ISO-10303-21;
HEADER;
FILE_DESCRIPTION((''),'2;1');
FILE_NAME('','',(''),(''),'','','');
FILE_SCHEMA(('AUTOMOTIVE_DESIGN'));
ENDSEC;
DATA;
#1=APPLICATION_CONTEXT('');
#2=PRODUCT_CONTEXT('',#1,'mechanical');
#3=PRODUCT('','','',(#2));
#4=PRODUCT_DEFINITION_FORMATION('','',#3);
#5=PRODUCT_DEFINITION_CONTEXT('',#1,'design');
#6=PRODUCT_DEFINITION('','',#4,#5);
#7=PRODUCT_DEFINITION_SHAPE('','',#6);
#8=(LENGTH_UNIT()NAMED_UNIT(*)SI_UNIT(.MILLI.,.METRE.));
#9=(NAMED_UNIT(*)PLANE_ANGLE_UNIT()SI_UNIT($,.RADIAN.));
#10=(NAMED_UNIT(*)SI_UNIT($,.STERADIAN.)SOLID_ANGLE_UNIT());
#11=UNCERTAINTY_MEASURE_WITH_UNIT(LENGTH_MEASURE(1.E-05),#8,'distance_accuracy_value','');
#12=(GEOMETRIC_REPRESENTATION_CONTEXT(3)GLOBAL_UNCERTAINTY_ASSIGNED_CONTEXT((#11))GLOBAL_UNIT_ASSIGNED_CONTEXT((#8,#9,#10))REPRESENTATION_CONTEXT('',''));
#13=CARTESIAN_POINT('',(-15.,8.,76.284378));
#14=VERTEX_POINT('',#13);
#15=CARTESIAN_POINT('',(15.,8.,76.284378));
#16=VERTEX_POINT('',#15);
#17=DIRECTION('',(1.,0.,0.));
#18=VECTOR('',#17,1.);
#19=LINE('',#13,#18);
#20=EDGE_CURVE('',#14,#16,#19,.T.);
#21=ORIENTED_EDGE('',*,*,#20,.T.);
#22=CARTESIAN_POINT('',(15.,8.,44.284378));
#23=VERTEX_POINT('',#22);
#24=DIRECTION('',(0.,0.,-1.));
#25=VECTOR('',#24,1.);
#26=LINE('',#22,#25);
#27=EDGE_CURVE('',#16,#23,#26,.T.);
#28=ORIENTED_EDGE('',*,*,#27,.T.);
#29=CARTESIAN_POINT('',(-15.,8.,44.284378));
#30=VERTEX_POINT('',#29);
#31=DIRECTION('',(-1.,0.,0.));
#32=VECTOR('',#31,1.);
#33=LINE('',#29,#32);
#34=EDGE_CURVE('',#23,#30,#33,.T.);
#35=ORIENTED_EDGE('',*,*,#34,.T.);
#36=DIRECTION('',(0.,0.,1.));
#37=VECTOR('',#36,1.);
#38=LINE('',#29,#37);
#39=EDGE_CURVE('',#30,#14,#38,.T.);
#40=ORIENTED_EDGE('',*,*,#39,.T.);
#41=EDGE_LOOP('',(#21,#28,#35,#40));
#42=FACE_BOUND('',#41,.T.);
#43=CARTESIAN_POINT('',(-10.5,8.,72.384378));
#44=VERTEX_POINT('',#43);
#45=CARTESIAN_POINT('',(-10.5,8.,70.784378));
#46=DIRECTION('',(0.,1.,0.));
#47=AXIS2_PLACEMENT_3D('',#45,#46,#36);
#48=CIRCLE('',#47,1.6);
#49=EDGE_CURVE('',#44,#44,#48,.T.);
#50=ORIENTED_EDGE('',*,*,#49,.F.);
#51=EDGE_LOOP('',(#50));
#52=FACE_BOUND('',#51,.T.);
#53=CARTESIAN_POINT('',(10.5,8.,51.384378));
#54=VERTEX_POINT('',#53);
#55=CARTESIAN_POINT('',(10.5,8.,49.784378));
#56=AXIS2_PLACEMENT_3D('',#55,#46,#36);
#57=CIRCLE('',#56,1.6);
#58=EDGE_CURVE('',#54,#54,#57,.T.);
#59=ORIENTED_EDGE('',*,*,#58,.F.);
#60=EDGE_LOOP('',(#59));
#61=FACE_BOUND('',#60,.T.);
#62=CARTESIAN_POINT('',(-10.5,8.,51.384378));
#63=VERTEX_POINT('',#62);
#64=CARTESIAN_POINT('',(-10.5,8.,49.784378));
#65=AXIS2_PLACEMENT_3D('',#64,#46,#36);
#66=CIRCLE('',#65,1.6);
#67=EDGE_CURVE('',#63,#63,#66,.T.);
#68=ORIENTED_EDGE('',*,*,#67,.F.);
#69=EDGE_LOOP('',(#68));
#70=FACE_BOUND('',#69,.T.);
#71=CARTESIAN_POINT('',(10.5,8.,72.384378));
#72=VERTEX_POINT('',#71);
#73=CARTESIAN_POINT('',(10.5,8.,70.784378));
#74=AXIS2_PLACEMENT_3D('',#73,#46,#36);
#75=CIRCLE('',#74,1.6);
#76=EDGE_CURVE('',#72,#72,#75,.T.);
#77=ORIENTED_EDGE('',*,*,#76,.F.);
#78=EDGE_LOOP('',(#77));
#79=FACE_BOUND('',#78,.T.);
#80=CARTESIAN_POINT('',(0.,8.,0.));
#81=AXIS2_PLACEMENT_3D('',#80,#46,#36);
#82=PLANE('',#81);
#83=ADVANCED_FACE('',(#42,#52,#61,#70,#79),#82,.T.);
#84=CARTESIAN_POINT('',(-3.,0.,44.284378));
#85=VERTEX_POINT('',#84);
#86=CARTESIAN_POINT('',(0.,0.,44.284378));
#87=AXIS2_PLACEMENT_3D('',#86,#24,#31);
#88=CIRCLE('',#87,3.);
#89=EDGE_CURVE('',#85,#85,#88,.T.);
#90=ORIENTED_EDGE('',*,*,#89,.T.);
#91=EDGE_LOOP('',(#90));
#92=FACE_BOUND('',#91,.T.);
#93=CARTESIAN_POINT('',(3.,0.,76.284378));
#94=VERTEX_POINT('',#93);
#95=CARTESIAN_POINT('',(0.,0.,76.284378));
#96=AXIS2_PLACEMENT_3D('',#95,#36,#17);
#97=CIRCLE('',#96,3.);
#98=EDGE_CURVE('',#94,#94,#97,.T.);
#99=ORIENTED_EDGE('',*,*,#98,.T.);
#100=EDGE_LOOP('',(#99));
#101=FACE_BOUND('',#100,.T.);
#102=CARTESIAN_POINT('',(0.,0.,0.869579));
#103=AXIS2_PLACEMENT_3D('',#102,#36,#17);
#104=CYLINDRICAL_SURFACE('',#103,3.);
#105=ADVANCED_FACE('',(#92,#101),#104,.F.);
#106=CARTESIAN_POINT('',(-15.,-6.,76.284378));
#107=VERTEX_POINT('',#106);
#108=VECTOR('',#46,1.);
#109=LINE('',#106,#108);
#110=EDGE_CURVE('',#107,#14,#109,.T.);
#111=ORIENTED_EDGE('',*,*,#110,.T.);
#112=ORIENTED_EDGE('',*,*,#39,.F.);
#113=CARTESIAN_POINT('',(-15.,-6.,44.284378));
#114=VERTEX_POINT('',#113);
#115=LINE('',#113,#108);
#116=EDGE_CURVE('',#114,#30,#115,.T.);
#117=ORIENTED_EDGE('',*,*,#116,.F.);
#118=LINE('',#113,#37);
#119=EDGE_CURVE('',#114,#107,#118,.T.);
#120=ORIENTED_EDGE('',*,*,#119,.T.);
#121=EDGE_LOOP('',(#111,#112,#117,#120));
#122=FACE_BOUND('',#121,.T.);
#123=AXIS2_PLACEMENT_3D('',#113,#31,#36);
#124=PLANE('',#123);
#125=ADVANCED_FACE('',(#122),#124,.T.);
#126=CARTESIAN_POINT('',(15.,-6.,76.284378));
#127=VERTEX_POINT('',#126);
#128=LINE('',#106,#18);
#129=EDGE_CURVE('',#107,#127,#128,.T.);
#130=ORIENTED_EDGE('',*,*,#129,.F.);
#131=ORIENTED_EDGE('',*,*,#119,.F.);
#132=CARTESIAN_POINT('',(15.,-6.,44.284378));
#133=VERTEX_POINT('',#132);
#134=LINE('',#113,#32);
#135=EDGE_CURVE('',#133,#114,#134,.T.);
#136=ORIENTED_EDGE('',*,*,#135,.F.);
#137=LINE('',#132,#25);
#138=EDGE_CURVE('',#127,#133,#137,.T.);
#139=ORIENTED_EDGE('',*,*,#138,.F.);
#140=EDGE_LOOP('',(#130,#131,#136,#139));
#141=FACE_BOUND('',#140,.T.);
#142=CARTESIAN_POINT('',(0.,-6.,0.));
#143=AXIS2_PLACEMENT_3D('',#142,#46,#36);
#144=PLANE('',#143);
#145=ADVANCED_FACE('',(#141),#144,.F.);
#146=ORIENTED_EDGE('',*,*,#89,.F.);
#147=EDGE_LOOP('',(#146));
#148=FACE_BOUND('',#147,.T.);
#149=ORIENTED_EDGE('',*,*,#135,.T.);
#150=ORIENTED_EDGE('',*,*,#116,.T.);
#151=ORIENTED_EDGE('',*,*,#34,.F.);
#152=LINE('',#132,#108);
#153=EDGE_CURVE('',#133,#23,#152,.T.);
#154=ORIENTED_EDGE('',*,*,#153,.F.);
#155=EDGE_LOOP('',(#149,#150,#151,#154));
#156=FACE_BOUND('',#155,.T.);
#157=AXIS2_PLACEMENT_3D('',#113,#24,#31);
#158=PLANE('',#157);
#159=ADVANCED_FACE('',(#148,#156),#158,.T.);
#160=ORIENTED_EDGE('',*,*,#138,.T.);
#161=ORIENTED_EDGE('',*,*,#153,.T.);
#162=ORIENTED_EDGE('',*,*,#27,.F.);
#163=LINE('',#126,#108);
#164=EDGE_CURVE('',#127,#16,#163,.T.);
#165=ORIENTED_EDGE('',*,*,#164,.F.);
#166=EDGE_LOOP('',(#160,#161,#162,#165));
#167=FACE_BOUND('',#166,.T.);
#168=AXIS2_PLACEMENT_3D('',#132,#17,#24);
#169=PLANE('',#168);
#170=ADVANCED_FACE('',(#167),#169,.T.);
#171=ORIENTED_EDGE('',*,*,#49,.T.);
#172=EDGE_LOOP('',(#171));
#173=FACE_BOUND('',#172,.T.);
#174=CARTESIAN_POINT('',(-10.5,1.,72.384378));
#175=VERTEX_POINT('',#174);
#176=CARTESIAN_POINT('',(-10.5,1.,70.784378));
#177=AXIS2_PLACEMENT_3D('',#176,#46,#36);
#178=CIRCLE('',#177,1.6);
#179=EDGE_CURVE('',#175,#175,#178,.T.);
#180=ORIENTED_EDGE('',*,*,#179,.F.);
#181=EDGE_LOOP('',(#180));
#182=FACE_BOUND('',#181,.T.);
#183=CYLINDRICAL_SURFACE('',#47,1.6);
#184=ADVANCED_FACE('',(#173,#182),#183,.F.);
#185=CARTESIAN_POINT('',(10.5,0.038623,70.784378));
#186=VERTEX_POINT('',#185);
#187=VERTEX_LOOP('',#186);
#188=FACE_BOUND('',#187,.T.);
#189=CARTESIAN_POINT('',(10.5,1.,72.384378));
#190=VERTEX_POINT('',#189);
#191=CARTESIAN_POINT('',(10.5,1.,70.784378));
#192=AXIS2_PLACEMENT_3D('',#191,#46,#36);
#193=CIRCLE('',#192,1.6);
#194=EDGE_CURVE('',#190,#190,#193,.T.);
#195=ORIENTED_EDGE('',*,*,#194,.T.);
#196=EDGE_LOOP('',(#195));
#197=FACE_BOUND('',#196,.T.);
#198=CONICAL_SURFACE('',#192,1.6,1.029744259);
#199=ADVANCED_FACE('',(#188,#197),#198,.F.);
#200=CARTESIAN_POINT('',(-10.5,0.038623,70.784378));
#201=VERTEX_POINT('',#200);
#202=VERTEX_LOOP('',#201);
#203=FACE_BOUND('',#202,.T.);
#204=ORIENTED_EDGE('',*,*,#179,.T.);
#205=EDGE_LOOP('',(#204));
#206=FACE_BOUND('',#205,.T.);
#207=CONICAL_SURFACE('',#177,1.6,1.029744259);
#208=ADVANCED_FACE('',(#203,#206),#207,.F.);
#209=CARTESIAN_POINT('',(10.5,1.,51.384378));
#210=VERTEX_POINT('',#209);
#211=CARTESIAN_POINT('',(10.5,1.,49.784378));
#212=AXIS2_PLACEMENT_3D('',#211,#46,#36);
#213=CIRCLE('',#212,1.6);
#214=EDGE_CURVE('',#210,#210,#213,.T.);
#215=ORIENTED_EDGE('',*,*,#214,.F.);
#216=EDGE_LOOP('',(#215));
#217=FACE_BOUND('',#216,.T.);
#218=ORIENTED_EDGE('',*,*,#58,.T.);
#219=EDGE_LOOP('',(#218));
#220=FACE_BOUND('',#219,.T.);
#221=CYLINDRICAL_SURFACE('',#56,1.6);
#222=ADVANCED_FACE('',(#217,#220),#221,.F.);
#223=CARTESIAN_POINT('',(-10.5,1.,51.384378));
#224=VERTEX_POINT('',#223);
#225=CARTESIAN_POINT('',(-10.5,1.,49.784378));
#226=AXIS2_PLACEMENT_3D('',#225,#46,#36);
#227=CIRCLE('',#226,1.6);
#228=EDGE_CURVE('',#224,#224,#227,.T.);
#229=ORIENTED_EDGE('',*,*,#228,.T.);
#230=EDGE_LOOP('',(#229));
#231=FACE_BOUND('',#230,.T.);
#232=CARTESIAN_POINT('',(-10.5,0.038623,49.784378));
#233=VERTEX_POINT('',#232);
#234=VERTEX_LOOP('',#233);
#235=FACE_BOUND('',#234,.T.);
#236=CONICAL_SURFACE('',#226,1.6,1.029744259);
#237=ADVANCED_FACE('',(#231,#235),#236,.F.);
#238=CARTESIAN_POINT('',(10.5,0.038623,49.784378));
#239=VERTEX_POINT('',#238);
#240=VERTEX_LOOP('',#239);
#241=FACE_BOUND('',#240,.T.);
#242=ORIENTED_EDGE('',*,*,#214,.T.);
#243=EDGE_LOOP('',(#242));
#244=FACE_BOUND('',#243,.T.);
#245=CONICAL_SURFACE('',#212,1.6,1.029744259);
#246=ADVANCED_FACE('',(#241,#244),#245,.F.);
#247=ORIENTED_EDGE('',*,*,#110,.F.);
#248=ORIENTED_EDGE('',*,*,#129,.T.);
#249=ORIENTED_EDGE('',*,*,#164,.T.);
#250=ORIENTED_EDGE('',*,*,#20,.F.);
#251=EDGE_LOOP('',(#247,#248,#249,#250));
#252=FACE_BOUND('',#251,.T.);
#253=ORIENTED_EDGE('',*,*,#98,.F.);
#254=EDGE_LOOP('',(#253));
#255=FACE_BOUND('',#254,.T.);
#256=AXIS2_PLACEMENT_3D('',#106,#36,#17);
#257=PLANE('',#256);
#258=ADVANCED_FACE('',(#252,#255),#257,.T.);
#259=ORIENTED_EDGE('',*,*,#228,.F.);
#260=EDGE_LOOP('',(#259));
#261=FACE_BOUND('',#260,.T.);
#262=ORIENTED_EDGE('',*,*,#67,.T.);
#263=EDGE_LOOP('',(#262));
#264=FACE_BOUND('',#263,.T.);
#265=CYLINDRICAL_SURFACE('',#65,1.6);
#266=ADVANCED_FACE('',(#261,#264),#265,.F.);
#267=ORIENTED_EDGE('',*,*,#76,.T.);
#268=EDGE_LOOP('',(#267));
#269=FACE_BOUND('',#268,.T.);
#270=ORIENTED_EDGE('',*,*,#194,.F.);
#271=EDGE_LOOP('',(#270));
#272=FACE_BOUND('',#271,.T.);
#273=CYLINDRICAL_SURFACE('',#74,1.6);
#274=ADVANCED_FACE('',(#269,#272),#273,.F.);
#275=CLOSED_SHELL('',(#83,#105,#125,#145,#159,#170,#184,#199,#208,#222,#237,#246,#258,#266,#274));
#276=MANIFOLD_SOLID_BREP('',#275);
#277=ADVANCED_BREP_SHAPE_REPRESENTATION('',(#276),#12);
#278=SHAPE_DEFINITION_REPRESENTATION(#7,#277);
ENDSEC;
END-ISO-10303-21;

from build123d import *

# Parameters (mm, degrees)
SKETCH1_W                = 30
SKETCH1_H                = 32
BOSS_EXTRUDE1_DEPTH      = 14
CAVITY1_START            = 44.284378121
CAVITY1_OUTLINE_R        = 3
CAVITY1_DEPTH            = 32
M3_CLEARANCE_HOLE1_D     = 3.2
M3_CLEARANCE_HOLE1_DEPTH = 7
M3_CLEARANCE_HOLE1_TIP   = 0.96137699


# Read off the part's stored shape, not the designer's step: Cavity1
with BuildPart() as part:
    # Sketch1 → Boss-Extrude1 (new body)
    with BuildSketch(Plane(origin=(0, 8, 0), x_dir=(1, 0, 0), z_dir=(0, 1, 0))):
        with Locations((0, -60.284378121)):
            Rectangle(SKETCH1_W, SKETCH1_H)
    extrude(amount=-BOSS_EXTRUDE1_DEPTH)

    # Cavity1 outline → Cavity1 (cut)
    with BuildSketch(Plane.XY.offset(CAVITY1_START)):
        Circle(CAVITY1_OUTLINE_R)
    extrude(amount=CAVITY1_DEPTH, mode=Mode.SUBTRACT)

    # M3 Clearance Hole1
    with Locations(Plane(origin=(0, 8, 0), x_dir=(1, 0, 0), z_dir=(0, 1, 0))):
        with Locations((10.5, -49.784378121), (-10.5, -49.784378121), (-10.5, -70.784378121), (10.5, -70.784378121)):
            Hole(M3_CLEARANCE_HOLE1_D / 2, depth=M3_CLEARANCE_HOLE1_DEPTH)
            with Locations((0, 0, -(M3_CLEARANCE_HOLE1_DEPTH + M3_CLEARANCE_HOLE1_TIP / 2))):  # 118° drill point
                Cone(0, M3_CLEARANCE_HOLE1_D / 2, M3_CLEARANCE_HOLE1_TIP, mode=Mode.SUBTRACT)


solid = part.part
